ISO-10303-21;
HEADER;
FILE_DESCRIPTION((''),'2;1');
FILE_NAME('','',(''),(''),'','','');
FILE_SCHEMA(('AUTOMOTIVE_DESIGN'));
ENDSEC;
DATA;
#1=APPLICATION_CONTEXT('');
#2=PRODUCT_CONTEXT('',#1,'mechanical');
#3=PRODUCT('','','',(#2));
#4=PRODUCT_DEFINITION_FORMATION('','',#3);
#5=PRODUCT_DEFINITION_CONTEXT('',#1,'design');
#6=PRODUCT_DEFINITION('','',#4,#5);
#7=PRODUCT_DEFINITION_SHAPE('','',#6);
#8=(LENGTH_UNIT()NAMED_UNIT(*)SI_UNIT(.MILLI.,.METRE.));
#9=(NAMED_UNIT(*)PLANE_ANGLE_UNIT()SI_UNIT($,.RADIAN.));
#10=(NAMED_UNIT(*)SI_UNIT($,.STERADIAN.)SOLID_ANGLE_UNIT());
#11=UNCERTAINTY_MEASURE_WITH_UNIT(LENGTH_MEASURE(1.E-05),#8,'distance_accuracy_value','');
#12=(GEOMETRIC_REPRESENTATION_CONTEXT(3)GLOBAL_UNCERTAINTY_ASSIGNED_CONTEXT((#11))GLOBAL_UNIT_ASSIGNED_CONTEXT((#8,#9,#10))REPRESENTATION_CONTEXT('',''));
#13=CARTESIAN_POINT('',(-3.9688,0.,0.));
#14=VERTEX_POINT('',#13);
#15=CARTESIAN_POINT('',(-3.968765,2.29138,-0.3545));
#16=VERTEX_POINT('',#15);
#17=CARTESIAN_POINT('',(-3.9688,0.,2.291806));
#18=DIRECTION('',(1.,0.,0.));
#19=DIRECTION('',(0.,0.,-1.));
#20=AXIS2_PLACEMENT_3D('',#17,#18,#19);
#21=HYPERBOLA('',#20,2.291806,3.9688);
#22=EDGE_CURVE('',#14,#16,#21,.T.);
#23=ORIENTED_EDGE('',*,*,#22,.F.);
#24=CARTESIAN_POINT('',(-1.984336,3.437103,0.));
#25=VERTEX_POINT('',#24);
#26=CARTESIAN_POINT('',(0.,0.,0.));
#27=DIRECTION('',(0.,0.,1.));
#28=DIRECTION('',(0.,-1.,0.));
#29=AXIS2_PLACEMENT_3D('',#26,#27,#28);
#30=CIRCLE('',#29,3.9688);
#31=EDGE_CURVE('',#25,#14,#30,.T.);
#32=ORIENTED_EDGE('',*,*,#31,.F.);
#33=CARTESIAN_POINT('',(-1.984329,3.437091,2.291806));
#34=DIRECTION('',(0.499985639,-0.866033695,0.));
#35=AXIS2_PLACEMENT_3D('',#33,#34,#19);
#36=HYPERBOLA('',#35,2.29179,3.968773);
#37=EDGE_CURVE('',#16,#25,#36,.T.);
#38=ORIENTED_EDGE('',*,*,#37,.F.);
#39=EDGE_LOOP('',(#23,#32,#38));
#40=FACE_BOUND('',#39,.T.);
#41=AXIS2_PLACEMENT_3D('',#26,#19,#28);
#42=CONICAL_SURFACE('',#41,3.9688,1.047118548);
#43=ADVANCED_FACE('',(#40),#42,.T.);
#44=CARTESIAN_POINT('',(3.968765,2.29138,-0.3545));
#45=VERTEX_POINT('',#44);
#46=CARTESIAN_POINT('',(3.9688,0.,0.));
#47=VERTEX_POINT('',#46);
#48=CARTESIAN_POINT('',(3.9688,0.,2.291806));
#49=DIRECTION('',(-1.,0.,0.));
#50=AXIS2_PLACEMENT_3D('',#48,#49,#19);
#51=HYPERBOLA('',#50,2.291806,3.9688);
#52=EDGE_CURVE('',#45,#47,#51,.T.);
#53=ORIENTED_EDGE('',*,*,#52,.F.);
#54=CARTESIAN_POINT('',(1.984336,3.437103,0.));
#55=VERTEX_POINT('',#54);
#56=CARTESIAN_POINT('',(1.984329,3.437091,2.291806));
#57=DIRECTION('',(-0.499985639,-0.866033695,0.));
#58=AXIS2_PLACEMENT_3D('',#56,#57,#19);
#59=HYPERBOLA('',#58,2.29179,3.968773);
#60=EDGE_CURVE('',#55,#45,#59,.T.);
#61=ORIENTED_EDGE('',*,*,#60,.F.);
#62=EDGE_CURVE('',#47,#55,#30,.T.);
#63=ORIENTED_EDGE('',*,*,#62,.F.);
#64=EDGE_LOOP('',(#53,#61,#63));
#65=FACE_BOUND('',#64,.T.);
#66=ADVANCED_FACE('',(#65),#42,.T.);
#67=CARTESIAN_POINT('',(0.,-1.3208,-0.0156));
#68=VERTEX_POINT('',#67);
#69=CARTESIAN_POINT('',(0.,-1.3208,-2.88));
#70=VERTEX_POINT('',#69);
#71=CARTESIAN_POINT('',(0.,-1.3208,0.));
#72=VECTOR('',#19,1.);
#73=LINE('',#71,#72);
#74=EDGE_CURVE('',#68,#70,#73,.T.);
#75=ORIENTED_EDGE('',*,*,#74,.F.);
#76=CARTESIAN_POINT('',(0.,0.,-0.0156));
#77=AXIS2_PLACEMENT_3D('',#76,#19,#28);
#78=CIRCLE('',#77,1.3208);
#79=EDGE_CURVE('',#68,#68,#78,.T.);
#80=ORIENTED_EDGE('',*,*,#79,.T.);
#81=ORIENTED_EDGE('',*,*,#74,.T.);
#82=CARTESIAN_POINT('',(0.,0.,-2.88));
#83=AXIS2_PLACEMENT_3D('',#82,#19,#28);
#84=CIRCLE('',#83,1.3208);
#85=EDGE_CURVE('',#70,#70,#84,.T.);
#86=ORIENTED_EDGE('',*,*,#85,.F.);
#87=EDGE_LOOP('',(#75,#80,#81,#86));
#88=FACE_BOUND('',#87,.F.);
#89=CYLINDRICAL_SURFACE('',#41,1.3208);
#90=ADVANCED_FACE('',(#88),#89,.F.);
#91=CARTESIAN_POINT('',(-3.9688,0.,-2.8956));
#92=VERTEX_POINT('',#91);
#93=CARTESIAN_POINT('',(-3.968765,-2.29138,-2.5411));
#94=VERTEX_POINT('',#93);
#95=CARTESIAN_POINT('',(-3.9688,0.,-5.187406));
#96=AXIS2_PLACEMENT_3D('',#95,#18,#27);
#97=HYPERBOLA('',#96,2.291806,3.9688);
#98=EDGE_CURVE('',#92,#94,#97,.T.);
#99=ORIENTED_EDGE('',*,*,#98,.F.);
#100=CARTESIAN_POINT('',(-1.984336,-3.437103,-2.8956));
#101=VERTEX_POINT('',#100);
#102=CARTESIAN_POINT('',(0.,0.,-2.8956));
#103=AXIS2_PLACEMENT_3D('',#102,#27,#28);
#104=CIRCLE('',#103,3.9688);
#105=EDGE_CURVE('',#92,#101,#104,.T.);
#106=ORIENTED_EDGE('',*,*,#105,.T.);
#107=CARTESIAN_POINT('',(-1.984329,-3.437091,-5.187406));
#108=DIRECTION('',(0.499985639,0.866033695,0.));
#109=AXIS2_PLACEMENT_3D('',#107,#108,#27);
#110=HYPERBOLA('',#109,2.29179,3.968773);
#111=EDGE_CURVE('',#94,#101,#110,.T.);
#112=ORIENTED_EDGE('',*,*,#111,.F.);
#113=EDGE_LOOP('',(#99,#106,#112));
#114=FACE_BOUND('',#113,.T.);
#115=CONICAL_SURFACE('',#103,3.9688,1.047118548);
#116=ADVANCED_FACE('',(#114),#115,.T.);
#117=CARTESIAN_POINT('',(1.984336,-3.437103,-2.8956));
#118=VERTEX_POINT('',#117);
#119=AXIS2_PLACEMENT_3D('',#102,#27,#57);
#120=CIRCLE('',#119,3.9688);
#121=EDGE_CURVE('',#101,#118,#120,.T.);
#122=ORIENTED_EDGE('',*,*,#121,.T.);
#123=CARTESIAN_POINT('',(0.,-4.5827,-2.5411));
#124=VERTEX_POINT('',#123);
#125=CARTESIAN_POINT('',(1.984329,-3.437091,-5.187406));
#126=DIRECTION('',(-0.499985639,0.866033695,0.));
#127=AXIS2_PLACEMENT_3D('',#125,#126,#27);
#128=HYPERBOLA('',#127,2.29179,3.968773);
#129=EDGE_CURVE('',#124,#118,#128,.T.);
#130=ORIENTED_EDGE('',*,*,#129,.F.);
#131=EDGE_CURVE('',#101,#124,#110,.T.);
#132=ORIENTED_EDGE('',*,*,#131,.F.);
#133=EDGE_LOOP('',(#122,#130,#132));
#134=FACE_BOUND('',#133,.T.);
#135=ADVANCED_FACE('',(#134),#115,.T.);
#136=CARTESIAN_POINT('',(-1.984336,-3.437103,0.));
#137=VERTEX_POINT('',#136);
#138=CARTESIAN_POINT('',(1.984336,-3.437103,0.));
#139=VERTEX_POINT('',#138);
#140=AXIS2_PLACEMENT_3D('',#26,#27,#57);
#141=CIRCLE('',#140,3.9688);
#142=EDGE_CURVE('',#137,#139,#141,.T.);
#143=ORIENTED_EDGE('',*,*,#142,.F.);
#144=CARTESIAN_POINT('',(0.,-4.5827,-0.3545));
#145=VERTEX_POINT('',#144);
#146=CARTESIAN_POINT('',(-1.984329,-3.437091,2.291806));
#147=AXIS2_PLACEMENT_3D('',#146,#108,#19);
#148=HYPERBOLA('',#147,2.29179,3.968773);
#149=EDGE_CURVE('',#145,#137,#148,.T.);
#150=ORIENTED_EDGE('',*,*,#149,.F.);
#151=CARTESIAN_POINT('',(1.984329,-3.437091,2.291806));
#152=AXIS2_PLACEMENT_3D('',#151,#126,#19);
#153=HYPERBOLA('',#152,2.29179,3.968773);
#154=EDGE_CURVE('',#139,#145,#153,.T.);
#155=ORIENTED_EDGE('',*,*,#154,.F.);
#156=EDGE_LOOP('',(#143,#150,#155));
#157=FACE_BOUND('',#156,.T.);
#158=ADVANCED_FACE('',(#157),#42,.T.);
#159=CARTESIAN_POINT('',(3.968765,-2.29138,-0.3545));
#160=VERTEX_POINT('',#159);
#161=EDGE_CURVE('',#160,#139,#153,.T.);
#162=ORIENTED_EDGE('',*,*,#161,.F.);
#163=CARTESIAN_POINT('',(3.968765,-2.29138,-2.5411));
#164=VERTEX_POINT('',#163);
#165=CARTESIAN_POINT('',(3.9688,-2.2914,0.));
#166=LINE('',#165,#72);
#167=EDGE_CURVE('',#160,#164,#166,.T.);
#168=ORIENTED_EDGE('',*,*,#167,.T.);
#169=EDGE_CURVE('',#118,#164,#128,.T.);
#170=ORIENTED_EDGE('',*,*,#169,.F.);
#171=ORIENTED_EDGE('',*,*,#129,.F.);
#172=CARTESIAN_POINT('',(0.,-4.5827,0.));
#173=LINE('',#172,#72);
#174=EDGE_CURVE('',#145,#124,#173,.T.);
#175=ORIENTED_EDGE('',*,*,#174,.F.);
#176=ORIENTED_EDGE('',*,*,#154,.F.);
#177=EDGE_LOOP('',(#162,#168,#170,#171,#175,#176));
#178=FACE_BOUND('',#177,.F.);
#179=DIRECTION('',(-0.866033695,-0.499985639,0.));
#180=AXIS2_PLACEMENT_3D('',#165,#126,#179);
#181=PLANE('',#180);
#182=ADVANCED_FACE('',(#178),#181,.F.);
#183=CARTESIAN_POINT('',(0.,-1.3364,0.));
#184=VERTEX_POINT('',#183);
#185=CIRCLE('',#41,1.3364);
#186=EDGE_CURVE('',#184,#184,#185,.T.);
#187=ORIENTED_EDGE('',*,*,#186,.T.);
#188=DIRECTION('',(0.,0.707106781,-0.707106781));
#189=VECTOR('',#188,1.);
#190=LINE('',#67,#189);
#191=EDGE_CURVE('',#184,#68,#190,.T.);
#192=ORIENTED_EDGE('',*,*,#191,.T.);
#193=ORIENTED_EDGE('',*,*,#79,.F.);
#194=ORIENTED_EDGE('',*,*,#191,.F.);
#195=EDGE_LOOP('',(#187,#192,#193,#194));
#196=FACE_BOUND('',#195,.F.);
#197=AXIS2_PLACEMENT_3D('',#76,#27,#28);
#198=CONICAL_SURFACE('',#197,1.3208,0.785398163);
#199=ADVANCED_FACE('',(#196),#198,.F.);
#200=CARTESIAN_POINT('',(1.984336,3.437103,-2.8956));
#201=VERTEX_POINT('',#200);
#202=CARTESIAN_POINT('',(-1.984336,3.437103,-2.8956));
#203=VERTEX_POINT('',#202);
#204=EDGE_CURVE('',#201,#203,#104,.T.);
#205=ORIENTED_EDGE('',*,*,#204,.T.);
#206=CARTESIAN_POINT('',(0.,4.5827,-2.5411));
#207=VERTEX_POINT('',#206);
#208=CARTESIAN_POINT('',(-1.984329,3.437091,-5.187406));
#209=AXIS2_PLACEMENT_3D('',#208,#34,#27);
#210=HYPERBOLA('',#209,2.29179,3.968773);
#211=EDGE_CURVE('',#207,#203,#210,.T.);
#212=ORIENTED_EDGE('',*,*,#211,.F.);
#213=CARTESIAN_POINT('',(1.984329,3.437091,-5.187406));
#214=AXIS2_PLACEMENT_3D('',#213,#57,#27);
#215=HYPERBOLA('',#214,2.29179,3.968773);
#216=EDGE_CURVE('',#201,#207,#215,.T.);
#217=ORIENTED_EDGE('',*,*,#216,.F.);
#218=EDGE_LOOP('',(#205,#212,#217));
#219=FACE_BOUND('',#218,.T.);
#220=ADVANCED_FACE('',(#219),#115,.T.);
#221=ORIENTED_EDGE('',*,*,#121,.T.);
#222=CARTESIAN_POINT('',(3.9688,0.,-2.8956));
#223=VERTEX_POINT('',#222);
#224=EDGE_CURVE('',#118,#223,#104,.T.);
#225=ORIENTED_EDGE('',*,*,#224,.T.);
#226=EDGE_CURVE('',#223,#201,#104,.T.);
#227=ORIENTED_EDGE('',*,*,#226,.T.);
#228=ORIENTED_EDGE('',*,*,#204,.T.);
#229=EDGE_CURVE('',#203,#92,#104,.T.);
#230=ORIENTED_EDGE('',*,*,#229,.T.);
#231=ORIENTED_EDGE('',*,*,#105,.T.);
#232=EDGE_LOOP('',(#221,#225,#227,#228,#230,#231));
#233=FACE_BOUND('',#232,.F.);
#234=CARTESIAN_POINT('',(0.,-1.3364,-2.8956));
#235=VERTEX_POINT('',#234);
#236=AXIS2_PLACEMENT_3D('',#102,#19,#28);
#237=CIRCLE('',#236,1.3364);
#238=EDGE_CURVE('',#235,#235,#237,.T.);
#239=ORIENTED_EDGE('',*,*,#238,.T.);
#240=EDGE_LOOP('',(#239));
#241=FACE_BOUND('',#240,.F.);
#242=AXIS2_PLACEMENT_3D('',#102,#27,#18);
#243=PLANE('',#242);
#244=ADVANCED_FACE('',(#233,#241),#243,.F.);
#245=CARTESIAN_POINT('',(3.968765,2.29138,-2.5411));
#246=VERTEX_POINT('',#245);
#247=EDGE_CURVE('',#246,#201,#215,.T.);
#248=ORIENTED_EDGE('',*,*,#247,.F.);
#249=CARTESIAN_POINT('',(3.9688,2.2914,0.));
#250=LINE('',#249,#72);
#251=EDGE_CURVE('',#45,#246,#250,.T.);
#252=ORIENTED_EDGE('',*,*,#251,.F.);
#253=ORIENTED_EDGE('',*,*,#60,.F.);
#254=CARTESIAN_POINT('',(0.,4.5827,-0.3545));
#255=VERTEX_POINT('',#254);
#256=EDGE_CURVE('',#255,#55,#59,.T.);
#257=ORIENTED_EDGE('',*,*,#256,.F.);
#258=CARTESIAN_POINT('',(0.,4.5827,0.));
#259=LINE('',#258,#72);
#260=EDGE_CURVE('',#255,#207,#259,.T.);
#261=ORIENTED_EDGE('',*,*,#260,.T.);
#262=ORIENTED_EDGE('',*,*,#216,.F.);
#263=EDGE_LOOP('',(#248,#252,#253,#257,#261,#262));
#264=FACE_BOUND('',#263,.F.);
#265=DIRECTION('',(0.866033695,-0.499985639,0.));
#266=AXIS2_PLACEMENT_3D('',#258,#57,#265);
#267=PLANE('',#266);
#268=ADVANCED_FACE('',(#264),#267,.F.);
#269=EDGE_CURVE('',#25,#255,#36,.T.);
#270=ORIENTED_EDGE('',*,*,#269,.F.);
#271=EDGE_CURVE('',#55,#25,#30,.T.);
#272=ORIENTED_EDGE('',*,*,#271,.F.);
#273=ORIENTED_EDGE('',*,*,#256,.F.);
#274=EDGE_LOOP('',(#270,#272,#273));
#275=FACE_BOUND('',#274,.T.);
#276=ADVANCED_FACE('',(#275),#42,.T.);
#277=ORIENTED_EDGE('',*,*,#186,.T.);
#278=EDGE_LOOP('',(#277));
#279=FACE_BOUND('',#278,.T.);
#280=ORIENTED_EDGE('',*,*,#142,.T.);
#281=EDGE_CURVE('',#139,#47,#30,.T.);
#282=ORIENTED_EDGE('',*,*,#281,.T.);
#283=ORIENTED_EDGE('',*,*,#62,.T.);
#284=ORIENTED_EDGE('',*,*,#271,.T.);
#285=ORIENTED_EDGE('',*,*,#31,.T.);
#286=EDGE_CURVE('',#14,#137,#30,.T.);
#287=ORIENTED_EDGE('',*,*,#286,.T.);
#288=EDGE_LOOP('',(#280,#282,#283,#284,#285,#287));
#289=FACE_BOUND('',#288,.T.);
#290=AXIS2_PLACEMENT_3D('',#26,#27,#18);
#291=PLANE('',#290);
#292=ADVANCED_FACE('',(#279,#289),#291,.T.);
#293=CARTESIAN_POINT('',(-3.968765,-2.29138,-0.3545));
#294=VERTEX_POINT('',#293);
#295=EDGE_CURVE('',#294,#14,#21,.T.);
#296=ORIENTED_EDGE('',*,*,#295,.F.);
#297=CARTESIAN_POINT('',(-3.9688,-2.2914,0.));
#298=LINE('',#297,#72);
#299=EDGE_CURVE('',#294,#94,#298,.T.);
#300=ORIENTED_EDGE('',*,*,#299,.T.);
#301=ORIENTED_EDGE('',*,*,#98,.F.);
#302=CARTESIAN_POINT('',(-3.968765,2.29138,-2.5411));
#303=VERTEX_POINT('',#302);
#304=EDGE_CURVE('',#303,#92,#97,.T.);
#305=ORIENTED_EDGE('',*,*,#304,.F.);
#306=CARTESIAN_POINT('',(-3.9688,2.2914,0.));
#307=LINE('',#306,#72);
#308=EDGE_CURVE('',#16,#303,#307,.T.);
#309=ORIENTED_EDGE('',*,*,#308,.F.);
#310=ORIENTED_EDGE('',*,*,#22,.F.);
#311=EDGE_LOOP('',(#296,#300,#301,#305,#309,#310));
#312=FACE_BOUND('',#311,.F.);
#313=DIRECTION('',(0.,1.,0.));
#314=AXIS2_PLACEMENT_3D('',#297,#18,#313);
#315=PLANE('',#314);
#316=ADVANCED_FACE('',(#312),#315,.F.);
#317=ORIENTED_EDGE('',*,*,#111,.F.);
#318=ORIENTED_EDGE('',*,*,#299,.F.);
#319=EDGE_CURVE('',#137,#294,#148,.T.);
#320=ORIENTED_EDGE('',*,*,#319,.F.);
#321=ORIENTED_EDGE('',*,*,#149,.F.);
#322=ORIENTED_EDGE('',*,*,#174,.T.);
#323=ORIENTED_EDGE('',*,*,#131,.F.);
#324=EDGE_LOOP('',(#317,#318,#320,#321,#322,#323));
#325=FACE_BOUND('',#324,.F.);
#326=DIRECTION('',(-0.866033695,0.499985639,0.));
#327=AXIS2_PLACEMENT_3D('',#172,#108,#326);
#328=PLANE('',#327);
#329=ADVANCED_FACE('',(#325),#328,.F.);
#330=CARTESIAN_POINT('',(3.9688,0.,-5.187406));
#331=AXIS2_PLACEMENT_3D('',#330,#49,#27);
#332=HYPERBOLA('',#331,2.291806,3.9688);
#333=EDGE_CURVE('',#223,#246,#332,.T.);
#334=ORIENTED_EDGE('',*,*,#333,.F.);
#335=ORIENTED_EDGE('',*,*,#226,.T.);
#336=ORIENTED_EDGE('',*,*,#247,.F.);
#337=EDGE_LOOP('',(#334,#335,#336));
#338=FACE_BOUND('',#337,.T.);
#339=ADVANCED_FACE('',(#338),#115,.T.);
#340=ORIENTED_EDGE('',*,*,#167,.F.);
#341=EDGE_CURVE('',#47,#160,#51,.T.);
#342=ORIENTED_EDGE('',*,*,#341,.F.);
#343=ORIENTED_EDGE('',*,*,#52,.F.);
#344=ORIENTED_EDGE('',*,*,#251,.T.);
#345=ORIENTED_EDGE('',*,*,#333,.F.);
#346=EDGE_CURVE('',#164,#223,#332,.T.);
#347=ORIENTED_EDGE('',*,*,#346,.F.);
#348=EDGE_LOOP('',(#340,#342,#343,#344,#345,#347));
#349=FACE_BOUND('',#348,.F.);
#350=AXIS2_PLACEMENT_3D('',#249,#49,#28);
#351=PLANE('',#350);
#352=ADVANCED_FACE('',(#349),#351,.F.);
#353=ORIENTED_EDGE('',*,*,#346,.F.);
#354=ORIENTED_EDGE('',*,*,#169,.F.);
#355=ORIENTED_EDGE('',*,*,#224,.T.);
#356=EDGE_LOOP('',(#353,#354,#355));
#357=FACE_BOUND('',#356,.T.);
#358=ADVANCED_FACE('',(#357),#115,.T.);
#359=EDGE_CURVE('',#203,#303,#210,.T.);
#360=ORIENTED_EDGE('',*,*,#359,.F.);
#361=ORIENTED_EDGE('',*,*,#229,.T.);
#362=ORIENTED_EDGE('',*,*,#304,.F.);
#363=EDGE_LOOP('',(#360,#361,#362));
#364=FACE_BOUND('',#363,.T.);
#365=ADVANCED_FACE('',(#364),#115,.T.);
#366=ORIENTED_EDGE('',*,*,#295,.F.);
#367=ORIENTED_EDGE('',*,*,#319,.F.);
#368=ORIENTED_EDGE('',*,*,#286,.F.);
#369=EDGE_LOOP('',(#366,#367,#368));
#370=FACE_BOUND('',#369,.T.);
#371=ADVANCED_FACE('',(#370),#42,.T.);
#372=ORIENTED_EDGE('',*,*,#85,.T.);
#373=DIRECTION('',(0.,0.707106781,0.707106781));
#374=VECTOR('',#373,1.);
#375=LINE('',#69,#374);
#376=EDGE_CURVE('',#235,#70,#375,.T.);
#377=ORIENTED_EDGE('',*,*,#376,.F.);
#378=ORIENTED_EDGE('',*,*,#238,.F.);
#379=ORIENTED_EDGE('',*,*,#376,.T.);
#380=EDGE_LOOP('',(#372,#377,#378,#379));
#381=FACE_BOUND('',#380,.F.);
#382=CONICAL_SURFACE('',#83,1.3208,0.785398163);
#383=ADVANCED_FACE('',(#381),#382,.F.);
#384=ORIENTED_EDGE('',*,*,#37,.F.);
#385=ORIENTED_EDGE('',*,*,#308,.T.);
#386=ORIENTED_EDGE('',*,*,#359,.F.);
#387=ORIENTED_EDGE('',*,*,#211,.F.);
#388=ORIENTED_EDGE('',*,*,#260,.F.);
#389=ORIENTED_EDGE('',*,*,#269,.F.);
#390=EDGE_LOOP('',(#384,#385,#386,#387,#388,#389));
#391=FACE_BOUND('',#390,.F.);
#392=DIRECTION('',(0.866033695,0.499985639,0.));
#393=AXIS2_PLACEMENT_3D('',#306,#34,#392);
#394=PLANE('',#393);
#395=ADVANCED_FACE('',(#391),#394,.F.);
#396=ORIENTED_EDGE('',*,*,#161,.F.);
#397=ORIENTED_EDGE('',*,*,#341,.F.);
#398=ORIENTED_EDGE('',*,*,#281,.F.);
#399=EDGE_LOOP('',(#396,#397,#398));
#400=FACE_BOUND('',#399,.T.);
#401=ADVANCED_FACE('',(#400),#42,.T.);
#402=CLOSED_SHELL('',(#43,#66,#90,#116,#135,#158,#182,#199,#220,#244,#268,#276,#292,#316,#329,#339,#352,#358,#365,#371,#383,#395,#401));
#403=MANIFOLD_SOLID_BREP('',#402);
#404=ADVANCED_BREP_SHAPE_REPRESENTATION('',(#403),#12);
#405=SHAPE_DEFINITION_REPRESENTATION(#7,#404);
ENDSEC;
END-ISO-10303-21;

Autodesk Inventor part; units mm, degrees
ref_plane "YZ Plane" through (0, 0, 0) normal (1, 0, 0) x (0, 1, 0)
sketch "Sketch7" plane through (0, 0, 0) normal (0, 0, 1) x (1, 0, 0)
  circle A0 centre (0, 0) radius 3.9688 construction
  line L0 (-3.9688, -2.2914) -> (-3.9688, 2.2914)
  line L1 (-3.9688, 2.2914) -> (0, 4.5827)
  line L2 (0, 4.5827) -> (3.9688, 2.2914)
  line L3 (3.9688, 2.2914) -> (3.9688, -2.2914)
  line L4 (3.9688, -2.2914) -> (0, -4.5827)
  line L5 (0, -4.5827) -> (-3.9688, -2.2914)
  dimension "d40" = 7.9375
extrude "Extrusion1" add sketch "Sketch7" against normal blind 2.8956
sketch "Sketch11" plane through (0, 0, 0) normal (0, 0, 1) x (1, 0, 0)
  line L0 (0, 4.5827) -> (3.9688, 2.2914) projected
  line L1 (-3.9688, 2.2914) -> (0, 4.5827) projected
  line L2 (-3.9688, 2.2914) -> (3.9688, -2.2914) construction
  line L3 (-3.9688, -2.2914) -> (3.9688, 2.2914) construction
  point P0 (0, 0)
hole "Hole1" at (0, 0, 0) direction (0, 0, -1) diameter 2.6416 end through all thread size "6-32 UNC" class "2B" standard "ANSI Unified Screw Threads"
chamfer "Chamfer1" distance 0.0156 angle 45 2 edges at (0, 1.3208, 0) (0, 1.3208, -2.8956)
sketch "Sketch9" plane through (0, 0, 0) normal (1, 0, 0) x (0, 1, 0)
  line L0 (-4.5827, -2.5411) -> (-4.5827, -2.8956)
  line L1 (-4.5827, -2.8956) -> (-3.9688, -2.8956)
  line L2 (-3.9688, -2.8956) -> (-4.5827, -2.5411)
  line L3 (0, -2.9665) -> (0, -2.4702) projected
  line L4 (-4.5827, -2.8956) -> (-2.2914, -2.8956) projected
  dimension "d38" = 7.9375
  dimension "d41" = 150
revolve "Revolution1" cut sketch "Sketch9" angle 360 about axis through (0, 0, -10) along (0, 0, 1)
sketch "Sketch10" plane through (0, 0, 0) normal (1, 0, 0) x (0, 1, 0)
  line L0 (-4.5827, -0.3545) -> (-4.5827, 0)
  line L1 (-4.5827, 0) -> (-3.9688, 0)
  line L2 (-3.9688, 0) -> (-4.5827, -0.3545)
  line L3 (0, -0.4254) -> (0, 0.0709) projected
  line L4 (-2.2914, 0) -> (-4.5827, 0) projected
  dimension "d45" = 7.9375
  dimension "d46" = 150
revolve "Revolution2" cut sketch "Sketch10" angle 360 about axis through (0, 0, -10) along (0, 0, 1)
ref_plane "MSC_PF1" through (0, 0, 0) normal (1, 0, 0) x (0, 1, 0)
ref_plane "MSC_PT1" through (0, 0, 0) normal (0, 0, 1) x (1, 0, 0)
equation "\"d38\" = Fbas"
equation "\"d40\" = Fbas"
equation "\"d29\" = Hbas"
equation "\"d63\" = 0.5 * PTC"
equation "\"d45\" = Fbas"
equation "\"Fbas\" = 7.9375"
equation "\"Hbas\" = 2.8956"
equation "\"NND\" = 3.5052"
equation "\"THREADDIA\" = NND"
equation "\"PTC\" = 0.03125"
properties part number "ASME B18.6.3 - 6-32" material "Steel, Mild"
